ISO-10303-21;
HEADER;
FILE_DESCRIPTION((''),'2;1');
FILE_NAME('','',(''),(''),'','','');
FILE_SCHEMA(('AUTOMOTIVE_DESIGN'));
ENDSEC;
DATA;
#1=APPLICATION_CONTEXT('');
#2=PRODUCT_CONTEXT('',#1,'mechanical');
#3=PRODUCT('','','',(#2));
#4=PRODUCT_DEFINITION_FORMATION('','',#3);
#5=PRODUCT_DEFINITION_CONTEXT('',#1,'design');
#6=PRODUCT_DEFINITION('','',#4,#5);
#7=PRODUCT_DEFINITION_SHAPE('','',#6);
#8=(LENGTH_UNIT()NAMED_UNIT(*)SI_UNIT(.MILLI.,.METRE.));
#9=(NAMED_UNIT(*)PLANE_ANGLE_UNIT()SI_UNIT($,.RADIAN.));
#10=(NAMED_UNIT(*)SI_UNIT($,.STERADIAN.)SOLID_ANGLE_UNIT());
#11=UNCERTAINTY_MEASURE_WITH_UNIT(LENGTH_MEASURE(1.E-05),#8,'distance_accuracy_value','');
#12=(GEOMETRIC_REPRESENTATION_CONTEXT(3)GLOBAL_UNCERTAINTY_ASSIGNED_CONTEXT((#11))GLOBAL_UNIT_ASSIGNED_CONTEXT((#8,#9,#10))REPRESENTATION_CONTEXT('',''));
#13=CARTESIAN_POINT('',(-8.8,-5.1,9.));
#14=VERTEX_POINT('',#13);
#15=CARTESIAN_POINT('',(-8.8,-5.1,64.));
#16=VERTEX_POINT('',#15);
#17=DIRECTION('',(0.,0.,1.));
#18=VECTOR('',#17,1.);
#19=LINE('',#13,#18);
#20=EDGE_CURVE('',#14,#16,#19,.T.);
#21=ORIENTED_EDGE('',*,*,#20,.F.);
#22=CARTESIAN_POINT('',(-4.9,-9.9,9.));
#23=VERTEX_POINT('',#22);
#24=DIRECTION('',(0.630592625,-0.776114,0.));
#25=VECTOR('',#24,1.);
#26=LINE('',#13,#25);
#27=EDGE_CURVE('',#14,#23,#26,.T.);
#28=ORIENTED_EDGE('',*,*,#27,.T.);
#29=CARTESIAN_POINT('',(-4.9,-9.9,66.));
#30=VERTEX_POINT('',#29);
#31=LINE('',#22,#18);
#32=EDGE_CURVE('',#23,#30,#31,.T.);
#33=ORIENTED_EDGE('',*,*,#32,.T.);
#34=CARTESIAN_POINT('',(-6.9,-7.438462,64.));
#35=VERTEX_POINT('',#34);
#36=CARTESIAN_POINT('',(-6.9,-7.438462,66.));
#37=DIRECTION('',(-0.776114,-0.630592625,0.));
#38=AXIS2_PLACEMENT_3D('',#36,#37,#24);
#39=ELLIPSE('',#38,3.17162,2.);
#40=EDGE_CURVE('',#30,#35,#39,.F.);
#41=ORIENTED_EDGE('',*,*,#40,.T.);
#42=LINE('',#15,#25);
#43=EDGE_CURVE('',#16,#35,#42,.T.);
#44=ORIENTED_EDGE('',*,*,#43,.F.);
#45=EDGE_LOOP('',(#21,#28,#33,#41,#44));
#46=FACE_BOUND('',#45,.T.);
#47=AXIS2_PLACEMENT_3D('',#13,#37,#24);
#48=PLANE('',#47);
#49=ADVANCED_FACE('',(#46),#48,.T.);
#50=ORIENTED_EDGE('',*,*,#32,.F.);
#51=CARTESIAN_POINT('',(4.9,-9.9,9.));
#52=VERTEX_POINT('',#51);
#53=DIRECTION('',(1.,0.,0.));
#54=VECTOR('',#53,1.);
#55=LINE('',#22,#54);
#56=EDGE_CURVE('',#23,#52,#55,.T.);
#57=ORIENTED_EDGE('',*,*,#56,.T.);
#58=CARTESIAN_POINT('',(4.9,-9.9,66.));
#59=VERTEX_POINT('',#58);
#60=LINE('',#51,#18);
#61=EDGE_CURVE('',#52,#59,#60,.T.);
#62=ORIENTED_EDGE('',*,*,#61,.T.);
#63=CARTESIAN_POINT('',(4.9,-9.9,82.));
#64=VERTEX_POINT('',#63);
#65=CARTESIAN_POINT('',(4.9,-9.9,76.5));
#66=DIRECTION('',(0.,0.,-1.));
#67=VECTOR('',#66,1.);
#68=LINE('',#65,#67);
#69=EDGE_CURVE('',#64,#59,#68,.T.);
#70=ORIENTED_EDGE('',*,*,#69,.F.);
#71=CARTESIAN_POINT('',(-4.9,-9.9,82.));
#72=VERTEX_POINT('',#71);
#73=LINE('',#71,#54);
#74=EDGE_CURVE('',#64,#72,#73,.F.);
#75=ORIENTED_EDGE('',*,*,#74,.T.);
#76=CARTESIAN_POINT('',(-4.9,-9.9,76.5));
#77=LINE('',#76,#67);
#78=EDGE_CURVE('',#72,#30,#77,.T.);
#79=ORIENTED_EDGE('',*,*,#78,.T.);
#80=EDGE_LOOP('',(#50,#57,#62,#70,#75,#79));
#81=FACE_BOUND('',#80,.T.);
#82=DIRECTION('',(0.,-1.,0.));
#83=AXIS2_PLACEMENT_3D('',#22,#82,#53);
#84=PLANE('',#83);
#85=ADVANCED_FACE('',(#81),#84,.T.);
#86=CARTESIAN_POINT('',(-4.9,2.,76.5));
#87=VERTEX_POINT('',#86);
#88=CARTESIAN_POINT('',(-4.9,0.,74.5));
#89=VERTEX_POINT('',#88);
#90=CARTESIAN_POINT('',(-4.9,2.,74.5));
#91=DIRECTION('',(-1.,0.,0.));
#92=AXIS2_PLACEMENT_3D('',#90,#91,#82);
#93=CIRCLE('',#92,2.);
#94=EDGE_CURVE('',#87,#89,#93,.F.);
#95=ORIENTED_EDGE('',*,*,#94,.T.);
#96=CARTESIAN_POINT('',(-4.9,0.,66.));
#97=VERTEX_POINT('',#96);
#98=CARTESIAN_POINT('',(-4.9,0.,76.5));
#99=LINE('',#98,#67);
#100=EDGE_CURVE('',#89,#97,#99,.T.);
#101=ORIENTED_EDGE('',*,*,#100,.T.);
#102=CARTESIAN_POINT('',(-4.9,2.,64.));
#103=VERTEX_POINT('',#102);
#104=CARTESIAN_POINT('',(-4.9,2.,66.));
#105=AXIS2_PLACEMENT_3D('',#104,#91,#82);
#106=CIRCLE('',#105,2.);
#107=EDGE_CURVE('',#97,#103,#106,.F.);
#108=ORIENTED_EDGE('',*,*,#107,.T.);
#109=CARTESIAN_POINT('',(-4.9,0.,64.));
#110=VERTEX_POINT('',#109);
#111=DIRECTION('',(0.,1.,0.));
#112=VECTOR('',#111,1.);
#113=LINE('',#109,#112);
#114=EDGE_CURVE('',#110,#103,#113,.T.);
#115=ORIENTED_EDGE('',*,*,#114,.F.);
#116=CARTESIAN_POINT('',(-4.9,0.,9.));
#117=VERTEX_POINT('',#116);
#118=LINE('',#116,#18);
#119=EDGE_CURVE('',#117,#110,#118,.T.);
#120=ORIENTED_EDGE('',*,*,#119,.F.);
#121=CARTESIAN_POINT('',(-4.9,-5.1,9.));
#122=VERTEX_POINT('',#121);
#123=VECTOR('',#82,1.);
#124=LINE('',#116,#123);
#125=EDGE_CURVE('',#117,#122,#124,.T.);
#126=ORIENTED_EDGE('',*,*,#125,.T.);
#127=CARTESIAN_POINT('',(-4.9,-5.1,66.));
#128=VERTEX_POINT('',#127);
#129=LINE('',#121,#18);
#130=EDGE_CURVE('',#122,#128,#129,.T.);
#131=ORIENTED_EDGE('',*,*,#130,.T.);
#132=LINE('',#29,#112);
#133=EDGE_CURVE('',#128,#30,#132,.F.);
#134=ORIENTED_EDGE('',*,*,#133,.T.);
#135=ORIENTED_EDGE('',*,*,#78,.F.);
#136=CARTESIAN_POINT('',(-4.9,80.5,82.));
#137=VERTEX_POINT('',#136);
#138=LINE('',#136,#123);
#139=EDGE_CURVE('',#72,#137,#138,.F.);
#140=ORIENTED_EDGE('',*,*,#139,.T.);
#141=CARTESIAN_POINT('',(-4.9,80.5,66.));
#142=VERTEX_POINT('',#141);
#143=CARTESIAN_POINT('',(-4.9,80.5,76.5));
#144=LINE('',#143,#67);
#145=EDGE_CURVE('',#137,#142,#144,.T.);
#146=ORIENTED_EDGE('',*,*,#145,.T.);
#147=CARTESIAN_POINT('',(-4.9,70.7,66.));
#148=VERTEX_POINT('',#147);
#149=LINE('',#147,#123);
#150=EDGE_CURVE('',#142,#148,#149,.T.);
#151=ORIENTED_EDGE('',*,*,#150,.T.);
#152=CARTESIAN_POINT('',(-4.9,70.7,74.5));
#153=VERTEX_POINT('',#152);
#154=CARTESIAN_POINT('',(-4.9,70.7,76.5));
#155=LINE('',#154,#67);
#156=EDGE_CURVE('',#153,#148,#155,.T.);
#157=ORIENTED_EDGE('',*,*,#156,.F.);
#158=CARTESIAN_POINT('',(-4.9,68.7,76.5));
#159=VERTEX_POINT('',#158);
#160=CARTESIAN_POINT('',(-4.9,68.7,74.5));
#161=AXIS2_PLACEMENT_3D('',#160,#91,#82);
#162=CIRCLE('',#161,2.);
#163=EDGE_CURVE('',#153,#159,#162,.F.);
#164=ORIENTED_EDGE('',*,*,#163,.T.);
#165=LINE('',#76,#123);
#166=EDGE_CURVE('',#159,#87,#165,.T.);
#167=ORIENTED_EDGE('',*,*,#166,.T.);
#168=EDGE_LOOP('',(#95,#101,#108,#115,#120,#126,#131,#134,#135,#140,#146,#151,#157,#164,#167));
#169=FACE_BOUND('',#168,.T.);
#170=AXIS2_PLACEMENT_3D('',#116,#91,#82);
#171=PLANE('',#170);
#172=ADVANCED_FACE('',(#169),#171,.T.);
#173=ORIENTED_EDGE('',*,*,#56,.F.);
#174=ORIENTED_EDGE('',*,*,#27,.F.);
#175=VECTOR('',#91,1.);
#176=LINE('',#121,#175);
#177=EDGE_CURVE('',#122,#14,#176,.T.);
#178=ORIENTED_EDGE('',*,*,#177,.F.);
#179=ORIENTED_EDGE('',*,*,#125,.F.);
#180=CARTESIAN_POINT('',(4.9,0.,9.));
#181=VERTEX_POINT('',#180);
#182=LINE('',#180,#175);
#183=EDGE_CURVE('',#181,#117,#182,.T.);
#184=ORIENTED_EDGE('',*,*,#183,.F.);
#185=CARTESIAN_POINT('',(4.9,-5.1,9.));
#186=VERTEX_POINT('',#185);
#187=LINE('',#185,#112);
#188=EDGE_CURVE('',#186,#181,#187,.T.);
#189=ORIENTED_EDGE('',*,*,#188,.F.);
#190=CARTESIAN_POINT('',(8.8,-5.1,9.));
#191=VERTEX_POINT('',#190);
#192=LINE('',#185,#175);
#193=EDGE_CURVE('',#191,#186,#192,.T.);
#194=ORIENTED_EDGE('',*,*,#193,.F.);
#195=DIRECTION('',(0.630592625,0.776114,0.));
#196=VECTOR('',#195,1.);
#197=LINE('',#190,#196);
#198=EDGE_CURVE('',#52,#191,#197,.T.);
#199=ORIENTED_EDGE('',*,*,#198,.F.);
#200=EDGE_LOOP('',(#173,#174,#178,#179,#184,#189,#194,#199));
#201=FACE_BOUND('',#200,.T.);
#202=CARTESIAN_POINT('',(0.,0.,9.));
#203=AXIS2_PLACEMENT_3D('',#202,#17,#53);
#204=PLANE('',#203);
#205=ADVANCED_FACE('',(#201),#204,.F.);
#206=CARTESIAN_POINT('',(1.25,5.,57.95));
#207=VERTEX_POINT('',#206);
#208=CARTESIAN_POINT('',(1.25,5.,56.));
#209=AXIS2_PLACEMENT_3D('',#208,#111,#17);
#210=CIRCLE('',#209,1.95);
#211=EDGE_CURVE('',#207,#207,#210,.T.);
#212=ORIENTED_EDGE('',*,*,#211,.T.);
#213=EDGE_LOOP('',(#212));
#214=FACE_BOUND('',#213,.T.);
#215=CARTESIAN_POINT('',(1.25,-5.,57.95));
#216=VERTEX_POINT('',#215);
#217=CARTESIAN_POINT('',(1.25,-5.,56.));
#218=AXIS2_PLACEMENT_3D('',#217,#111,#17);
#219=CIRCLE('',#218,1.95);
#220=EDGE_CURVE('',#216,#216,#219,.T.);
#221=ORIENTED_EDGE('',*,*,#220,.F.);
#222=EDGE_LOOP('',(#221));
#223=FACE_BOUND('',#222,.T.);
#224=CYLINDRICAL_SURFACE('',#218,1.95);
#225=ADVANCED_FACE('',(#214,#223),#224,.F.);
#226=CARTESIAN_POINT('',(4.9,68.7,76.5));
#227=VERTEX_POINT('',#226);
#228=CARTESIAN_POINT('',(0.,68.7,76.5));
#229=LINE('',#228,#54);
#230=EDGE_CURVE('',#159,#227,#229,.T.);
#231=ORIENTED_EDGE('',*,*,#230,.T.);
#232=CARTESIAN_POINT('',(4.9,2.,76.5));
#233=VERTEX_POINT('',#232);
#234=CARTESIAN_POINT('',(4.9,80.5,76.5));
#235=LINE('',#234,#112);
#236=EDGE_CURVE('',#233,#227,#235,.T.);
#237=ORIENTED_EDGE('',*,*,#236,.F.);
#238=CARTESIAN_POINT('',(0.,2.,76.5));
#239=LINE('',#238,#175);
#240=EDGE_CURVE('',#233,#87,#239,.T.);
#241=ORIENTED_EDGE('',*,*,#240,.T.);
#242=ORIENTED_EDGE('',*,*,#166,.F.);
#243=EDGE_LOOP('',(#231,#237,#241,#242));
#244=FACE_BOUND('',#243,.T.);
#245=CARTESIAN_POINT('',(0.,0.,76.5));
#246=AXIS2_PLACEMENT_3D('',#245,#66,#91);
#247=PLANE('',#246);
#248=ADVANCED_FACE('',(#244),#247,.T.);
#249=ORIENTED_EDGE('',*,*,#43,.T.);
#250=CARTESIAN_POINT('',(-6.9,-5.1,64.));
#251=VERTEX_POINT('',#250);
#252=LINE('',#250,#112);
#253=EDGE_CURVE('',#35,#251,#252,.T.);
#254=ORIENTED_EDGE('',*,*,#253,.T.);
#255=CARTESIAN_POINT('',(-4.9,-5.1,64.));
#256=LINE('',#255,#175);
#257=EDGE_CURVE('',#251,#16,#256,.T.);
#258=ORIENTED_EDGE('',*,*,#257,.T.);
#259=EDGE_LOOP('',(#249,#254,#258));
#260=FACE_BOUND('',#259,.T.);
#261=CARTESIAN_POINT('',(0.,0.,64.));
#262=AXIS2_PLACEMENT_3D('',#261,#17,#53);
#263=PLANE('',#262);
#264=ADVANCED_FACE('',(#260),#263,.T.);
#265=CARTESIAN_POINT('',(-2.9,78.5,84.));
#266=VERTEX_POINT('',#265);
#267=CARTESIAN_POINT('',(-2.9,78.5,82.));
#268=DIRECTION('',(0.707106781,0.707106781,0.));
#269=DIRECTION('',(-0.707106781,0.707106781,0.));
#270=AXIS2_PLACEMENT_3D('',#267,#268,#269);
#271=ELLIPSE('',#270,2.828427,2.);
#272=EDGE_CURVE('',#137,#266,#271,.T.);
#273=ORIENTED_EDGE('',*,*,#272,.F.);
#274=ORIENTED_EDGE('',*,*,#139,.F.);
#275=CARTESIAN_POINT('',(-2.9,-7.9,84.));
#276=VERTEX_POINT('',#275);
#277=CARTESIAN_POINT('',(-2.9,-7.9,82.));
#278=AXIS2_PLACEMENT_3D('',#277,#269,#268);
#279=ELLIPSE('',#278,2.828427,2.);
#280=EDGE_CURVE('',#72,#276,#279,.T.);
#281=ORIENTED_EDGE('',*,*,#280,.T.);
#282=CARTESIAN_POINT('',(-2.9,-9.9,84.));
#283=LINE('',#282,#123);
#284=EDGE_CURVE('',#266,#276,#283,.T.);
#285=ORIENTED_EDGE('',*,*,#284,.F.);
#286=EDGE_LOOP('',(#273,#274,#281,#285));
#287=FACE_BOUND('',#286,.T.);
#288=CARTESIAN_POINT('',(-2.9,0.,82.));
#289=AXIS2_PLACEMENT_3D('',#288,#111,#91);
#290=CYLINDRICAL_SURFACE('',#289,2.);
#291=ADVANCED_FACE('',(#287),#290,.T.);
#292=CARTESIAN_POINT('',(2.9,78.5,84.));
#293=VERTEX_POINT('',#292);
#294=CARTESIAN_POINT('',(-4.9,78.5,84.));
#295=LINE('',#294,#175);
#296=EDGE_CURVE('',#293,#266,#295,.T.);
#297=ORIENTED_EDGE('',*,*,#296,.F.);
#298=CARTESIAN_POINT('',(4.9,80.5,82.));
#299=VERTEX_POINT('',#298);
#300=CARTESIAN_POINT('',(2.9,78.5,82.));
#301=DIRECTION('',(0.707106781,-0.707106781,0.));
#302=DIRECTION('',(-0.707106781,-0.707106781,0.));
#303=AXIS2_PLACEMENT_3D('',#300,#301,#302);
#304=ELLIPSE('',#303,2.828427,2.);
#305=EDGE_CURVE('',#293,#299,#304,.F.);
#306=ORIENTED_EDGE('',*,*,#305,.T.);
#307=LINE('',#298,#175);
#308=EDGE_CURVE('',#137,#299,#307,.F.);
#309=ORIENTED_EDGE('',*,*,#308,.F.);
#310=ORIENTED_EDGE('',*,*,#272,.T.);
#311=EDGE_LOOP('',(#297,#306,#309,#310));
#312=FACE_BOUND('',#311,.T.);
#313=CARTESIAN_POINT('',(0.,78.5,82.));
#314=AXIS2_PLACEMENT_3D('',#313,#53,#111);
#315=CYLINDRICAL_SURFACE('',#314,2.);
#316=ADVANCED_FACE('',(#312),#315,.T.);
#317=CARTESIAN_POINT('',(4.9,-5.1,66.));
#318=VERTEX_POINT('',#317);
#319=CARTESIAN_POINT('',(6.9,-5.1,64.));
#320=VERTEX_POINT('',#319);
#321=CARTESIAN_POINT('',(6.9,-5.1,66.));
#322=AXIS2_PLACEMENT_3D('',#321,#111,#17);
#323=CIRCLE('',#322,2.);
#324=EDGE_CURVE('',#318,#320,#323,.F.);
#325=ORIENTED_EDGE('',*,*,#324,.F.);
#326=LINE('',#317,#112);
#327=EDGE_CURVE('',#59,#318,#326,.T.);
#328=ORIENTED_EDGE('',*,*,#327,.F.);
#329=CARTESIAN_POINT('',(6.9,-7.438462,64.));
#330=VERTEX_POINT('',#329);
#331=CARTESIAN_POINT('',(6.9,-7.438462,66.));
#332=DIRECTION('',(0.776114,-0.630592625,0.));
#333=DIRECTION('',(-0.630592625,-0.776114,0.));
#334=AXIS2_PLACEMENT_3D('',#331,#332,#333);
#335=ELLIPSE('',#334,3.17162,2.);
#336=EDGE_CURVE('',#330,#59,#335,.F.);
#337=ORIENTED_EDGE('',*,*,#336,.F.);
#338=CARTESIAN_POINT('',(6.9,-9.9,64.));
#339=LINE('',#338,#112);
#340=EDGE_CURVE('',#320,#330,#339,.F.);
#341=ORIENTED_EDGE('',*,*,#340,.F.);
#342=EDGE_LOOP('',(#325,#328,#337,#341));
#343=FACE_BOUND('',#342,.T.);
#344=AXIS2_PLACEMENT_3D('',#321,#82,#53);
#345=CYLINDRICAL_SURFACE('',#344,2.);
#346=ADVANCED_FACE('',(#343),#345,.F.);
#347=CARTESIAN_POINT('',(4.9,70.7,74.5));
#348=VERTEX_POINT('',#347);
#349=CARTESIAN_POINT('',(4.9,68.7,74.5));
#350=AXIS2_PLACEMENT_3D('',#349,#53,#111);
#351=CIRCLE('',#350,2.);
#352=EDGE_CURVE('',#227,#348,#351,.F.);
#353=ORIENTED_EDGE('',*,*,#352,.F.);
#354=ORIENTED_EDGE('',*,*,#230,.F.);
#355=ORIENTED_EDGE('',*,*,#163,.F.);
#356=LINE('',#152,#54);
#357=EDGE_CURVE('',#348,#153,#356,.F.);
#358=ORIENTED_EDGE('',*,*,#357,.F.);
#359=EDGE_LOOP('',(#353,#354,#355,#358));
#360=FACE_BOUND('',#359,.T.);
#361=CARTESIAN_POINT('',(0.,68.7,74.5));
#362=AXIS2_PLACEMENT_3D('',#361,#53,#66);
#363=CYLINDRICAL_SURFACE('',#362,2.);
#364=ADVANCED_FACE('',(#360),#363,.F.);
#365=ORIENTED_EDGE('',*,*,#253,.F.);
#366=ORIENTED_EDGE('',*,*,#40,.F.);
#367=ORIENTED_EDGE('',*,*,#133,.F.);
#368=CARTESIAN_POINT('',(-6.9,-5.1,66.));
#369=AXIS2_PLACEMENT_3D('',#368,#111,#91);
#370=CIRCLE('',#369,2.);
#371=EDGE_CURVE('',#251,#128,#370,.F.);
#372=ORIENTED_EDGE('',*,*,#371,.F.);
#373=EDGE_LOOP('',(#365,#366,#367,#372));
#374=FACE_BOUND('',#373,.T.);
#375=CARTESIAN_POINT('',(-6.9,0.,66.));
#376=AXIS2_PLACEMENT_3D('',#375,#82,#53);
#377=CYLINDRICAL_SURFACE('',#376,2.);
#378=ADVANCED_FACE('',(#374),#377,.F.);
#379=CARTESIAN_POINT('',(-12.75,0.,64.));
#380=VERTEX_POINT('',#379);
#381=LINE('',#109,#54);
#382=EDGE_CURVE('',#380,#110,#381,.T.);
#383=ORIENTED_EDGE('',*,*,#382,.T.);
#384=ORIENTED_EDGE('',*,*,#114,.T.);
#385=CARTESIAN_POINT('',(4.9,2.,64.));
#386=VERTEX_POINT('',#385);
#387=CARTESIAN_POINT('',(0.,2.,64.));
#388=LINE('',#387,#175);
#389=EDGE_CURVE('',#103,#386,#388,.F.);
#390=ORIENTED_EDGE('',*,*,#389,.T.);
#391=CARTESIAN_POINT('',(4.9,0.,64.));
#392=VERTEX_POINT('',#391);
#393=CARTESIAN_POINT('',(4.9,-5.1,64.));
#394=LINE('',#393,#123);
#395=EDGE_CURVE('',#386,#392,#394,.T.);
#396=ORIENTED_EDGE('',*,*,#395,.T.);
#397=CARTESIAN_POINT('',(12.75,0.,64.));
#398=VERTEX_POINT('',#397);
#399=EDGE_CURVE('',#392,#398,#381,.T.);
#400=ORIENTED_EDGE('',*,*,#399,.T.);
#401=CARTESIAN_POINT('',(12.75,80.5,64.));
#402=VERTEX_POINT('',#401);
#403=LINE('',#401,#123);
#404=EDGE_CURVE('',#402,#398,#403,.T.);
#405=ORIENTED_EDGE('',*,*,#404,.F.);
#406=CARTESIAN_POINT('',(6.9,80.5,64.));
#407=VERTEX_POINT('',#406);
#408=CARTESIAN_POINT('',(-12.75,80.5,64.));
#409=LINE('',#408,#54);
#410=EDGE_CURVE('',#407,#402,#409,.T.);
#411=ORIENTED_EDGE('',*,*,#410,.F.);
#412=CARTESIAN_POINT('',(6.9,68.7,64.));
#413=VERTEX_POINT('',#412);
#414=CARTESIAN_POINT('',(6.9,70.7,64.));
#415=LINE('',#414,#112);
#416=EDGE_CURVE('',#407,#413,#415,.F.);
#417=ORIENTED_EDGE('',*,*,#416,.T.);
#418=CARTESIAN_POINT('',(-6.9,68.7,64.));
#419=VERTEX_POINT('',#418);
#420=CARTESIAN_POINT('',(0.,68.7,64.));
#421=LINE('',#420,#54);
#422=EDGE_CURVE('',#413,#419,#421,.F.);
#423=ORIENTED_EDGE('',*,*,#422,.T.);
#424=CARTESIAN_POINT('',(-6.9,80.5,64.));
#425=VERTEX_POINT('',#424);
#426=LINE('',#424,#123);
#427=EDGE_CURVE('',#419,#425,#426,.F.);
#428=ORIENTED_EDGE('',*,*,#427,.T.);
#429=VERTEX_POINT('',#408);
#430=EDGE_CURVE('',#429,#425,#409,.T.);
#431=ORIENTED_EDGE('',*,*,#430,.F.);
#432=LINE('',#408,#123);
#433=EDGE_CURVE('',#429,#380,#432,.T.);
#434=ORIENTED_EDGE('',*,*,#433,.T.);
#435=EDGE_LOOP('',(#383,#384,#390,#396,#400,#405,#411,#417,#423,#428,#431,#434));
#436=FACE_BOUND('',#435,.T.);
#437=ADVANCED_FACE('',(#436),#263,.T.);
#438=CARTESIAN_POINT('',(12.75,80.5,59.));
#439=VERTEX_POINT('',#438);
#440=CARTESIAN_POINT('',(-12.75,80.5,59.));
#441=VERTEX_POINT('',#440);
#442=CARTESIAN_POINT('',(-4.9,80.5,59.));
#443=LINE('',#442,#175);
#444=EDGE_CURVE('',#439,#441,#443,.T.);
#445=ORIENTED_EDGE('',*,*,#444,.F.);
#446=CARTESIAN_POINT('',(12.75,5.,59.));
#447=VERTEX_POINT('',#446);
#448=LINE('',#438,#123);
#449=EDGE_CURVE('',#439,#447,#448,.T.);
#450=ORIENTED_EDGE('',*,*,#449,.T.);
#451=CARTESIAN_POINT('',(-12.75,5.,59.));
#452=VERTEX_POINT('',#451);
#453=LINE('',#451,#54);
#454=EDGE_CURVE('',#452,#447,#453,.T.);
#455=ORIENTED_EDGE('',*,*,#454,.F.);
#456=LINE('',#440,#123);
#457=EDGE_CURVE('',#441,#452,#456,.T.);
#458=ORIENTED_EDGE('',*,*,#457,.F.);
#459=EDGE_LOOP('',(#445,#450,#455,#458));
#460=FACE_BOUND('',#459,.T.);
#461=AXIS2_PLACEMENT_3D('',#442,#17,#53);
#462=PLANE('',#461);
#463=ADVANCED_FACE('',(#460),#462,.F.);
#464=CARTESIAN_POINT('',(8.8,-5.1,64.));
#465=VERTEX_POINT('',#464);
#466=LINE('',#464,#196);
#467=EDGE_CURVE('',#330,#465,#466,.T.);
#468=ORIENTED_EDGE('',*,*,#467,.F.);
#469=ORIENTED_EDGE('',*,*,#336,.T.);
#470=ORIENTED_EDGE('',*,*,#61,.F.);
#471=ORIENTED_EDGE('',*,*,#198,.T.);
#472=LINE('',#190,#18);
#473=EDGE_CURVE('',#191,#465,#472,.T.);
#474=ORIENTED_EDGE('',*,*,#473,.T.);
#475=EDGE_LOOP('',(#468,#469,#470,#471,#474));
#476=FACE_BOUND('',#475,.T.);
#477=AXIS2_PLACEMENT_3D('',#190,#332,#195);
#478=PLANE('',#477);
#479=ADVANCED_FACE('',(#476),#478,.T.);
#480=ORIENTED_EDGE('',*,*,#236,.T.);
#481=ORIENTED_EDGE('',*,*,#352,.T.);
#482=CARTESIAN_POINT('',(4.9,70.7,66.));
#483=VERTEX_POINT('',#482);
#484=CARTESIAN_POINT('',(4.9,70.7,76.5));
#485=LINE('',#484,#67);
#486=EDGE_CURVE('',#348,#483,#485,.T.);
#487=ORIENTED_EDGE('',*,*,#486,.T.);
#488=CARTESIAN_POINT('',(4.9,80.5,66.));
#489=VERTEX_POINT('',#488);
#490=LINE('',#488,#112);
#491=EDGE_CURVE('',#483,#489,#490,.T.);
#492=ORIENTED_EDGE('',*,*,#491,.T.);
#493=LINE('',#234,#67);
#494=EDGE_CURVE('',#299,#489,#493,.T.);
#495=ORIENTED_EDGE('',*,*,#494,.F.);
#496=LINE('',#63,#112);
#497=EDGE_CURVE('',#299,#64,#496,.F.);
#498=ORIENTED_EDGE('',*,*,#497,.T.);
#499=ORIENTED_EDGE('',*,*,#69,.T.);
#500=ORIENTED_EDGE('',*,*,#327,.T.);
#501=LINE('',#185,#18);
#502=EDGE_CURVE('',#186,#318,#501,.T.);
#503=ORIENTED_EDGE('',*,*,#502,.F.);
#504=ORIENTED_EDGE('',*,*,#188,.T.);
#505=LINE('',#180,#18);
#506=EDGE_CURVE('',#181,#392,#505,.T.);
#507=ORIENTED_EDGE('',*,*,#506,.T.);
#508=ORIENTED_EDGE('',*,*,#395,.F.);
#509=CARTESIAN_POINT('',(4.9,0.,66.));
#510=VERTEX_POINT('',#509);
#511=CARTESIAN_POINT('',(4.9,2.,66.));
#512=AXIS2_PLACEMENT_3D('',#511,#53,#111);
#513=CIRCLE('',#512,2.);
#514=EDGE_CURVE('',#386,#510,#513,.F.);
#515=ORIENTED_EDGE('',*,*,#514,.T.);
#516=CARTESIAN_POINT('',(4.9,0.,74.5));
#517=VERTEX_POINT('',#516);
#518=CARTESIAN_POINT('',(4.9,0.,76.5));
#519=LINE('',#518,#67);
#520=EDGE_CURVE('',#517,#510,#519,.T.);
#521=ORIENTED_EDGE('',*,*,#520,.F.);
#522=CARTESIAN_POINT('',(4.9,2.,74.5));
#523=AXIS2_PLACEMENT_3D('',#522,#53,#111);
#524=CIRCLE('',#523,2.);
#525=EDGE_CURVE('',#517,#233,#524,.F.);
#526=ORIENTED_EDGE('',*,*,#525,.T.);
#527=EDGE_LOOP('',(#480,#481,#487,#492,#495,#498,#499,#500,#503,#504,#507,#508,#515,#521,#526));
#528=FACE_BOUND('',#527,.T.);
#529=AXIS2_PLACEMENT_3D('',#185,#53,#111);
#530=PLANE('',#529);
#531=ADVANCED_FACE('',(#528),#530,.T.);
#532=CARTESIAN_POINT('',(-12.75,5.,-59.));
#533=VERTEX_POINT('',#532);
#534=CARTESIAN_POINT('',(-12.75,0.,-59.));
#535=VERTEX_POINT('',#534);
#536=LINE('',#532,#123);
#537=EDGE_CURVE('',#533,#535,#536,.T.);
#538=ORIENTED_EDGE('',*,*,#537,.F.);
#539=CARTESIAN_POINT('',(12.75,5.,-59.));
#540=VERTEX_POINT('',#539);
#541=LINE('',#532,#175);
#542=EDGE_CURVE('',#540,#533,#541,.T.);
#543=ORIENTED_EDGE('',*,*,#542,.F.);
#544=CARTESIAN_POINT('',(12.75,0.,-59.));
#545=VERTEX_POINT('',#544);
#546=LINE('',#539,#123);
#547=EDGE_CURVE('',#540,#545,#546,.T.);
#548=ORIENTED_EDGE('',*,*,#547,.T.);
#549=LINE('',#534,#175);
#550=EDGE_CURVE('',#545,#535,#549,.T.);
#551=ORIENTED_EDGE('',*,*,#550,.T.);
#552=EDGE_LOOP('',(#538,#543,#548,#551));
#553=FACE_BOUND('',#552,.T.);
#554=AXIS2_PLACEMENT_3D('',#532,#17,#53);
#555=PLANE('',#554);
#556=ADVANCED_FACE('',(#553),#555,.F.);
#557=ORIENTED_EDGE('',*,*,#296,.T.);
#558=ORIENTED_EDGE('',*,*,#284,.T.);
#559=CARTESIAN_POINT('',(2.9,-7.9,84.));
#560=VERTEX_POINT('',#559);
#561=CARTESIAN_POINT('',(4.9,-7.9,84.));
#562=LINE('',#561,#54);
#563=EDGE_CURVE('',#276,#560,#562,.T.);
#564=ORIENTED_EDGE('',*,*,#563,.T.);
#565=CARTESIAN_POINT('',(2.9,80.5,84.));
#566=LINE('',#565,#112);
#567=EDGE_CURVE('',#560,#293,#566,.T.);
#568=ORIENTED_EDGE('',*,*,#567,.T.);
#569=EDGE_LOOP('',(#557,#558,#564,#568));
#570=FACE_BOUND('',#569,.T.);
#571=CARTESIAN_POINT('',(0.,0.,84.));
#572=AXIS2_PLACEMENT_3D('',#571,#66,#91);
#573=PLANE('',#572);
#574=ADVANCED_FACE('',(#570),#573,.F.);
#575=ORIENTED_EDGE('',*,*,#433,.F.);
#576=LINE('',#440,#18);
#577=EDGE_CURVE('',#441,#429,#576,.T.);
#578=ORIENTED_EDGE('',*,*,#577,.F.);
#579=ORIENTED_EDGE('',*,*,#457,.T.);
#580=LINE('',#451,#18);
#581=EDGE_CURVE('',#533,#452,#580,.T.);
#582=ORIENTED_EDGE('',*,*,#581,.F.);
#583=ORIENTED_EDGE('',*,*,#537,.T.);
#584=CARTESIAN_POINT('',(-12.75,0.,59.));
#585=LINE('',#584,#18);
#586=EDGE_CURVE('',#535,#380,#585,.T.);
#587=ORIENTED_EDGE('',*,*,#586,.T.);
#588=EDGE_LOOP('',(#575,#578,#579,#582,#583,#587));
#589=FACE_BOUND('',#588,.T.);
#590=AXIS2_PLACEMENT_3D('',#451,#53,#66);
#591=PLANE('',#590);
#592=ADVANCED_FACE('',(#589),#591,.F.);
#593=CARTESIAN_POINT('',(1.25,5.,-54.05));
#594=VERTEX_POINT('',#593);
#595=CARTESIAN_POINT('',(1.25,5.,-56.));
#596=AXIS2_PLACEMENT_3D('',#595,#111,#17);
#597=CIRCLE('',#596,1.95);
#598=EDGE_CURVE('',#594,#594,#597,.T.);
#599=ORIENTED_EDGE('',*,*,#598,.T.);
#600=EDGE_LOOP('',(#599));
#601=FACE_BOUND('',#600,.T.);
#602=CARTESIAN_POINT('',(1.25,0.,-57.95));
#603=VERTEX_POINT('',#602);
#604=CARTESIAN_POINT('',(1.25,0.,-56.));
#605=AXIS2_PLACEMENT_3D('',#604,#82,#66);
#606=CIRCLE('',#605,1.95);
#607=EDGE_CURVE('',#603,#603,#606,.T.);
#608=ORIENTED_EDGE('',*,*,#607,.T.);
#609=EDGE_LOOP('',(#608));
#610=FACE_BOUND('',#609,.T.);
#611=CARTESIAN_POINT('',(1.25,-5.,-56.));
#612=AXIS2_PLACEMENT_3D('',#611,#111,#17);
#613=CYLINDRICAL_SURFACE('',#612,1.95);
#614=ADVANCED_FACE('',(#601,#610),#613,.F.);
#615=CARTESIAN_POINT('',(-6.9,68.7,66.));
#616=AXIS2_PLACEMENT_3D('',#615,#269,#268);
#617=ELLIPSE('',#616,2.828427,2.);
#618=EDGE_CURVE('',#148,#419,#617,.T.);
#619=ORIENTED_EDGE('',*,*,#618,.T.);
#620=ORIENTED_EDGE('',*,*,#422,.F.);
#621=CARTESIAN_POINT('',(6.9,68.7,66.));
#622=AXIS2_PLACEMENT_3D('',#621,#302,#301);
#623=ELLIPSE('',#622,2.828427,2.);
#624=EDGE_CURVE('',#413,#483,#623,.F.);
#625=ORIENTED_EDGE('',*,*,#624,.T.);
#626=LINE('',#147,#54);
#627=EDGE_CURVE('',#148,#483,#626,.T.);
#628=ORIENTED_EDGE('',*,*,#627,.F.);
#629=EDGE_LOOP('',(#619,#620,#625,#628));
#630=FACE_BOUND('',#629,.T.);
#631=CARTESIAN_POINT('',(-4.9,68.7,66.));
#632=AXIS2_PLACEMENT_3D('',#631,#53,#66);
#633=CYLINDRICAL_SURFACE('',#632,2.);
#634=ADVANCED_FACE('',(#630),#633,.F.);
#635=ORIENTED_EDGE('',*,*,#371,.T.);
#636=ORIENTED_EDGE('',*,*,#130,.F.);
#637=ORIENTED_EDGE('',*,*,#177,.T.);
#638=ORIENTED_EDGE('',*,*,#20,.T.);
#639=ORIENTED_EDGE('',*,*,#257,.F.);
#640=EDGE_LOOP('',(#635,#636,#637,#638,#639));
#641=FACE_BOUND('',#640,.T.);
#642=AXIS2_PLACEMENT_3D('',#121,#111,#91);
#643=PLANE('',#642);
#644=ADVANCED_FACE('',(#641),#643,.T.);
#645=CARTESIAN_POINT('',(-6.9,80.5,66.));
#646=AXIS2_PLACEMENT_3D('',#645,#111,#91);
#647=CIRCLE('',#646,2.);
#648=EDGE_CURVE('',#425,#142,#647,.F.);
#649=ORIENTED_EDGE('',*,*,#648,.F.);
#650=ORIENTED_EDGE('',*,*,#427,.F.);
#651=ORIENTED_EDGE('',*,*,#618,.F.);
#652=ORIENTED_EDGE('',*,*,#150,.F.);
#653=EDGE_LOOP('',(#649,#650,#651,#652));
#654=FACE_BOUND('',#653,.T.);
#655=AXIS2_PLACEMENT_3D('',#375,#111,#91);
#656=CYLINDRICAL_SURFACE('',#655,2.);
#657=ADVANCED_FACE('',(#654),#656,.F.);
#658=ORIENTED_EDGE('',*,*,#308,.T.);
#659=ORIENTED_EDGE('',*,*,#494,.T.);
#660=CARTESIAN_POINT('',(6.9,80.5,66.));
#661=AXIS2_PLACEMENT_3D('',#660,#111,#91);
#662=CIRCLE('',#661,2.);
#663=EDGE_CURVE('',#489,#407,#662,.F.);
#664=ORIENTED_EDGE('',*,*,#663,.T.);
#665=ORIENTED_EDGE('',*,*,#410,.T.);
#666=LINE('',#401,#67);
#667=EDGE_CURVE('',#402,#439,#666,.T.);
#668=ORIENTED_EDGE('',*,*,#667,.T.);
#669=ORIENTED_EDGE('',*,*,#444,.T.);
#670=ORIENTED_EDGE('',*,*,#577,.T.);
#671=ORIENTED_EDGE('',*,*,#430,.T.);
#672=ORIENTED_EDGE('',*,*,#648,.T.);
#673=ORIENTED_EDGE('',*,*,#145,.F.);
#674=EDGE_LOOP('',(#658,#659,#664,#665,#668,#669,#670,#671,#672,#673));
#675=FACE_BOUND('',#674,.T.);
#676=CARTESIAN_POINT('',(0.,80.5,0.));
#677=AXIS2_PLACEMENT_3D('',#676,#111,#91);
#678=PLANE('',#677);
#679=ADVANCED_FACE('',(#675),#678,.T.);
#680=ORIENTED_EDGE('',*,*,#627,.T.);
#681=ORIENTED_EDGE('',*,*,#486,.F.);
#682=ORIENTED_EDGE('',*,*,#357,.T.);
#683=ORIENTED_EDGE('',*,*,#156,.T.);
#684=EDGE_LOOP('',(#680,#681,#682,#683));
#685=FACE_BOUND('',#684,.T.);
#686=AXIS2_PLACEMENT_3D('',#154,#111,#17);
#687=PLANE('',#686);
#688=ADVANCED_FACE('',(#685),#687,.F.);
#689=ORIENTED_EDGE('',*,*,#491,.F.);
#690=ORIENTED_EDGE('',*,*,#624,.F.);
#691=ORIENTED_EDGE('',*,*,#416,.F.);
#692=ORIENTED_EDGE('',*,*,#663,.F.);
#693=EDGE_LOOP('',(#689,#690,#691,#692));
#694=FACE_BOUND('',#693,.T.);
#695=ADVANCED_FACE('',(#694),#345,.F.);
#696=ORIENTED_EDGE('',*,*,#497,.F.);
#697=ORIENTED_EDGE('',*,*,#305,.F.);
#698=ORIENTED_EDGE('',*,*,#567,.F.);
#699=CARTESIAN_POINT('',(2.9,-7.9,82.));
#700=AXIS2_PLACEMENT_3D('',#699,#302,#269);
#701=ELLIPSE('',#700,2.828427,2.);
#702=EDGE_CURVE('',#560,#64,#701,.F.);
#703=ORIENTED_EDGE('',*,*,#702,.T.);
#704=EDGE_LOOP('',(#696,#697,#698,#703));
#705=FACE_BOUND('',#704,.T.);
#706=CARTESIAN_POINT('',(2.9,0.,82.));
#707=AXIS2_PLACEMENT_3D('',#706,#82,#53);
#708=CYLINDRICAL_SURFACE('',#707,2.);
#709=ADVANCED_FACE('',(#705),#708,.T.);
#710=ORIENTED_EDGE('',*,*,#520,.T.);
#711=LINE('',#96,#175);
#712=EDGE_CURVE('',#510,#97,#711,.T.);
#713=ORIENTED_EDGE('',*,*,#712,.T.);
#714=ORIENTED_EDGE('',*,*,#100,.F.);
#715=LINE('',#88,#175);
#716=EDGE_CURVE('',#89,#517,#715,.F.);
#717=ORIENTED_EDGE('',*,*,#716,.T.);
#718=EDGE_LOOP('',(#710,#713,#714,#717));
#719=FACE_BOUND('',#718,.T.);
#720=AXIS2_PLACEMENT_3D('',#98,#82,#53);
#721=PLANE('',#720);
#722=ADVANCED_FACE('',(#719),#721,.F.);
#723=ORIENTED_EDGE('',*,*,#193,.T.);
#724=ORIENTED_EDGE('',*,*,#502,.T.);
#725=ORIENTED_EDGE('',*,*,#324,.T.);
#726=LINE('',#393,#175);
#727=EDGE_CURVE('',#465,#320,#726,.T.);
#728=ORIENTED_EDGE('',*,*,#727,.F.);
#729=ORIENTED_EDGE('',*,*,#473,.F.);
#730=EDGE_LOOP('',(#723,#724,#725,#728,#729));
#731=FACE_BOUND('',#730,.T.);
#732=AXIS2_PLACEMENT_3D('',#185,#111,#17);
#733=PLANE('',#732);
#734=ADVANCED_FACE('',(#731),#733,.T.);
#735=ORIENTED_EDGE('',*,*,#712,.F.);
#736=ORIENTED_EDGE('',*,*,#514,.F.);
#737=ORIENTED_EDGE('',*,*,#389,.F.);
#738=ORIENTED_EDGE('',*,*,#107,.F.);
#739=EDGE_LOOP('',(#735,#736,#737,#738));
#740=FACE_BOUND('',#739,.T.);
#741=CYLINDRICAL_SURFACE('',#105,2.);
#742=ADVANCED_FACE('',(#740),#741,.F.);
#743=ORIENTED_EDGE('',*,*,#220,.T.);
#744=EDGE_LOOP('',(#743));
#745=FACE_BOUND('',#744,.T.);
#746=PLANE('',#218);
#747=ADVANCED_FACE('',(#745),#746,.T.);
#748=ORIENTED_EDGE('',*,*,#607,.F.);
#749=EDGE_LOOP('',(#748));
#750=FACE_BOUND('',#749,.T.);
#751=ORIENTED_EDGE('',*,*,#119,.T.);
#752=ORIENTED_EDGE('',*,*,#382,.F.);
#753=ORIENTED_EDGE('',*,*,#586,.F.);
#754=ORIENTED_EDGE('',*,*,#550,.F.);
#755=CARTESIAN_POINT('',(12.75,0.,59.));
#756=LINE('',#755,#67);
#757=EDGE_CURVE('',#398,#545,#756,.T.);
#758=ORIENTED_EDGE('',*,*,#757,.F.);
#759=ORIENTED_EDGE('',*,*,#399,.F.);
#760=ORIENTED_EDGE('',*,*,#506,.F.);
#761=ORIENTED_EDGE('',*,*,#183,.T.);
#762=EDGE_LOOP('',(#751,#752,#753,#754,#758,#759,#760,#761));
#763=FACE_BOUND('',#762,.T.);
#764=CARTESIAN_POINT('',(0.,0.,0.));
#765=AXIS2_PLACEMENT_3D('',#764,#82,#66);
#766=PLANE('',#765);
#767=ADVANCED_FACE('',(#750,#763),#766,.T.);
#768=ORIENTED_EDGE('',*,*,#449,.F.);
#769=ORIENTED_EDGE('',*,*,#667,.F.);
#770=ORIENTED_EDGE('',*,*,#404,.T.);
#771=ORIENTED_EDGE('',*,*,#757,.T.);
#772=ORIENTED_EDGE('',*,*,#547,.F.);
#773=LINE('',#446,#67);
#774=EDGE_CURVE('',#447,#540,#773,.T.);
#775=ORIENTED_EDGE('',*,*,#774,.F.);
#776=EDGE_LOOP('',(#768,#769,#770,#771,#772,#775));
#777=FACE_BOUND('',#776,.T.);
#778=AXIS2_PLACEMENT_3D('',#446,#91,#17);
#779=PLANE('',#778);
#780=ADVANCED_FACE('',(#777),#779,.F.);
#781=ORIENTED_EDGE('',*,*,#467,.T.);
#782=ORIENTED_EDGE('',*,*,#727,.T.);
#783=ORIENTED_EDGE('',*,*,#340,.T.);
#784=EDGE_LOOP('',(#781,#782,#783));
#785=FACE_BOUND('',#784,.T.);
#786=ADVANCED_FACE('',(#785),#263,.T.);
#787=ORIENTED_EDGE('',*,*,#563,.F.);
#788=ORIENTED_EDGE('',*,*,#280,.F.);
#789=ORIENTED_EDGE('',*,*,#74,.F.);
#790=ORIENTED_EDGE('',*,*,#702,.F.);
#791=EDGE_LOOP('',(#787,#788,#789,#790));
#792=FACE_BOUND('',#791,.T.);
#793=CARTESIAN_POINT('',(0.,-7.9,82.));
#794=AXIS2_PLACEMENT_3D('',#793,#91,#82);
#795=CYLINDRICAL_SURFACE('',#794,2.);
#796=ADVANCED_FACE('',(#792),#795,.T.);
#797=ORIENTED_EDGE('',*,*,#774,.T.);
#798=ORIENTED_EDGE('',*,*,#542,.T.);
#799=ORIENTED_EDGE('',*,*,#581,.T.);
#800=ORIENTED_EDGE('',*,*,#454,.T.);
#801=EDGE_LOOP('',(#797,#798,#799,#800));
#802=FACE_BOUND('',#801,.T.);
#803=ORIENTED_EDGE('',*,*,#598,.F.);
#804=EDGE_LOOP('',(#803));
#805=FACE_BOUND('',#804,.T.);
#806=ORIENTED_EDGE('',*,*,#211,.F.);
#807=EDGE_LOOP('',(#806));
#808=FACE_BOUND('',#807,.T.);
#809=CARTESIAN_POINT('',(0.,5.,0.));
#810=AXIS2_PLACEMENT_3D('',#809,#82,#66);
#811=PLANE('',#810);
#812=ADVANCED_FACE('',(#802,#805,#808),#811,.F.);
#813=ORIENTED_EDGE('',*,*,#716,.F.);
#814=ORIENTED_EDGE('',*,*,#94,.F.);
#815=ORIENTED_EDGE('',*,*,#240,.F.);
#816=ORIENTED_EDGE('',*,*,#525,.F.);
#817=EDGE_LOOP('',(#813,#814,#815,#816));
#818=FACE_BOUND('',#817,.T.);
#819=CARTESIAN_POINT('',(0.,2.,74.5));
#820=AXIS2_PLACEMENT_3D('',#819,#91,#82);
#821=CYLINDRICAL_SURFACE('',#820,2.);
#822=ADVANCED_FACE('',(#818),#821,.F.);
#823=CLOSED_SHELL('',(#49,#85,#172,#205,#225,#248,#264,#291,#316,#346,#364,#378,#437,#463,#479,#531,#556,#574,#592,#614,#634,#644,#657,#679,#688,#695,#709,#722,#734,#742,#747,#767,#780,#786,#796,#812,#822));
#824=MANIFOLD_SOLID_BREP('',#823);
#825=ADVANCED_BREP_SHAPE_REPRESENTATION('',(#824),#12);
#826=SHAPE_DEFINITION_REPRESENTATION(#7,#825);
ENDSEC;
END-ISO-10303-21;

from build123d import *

# Parameters (mm, degrees)
SKETCH1_W            = 25.5
SKETCH1_H            = 118
BOSS_EXTRUDE1_DEPTH  = 5
BOSS_EXTRUDE5_DEPTH  = 50
SKETCH2_R            = 1.95
CUT_EXTRUDE1_DEPTH   = 10
BOSS_EXTRUDE7_DEPTH  = 5
BOSS_EXTRUDE8_DEPTH  = 80.5
SKETCH9_W            = 9.8
SKETCH9_H            = 9.8
SKETCH9_H_2          = 9.9
BOSS_EXTRUDE10_DEPTH = 12.5
SKETCH10_W           = 9.8
SKETCH10_H           = 90.4
BOSS_EXTRUDE11_DEPTH = 7.5
FILLET1_R            = 2


with BuildPart() as part:
    # Sketch1 → Boss-Extrude1 (new body)
    with BuildSketch(Plane(origin=(0, 0, 0), x_dir=(1, 0, 0), z_dir=(0, 1, 0))):
        Rectangle(SKETCH1_W, SKETCH1_H)
    extrude(amount=BOSS_EXTRUDE1_DEPTH)

    # Sketch5 → Boss-Extrude5 (add)
    with BuildSketch(Plane.XY.offset(59)):
        Polygon((-4.9, 0), (-4.9, -5.1), (-8.8, -5.1), (-4.9, -9.9), (4.9, -9.9), (8.8, -5.1), (4.9, -5.1), (4.9, 0), align=None)
    extrude(amount=-BOSS_EXTRUDE5_DEPTH)

    # Sketch2 → Cut-Extrude1 (cut)
    with BuildSketch(Plane(origin=(0, 5, 0), x_dir=(1, 0, 0), z_dir=(0, 1, 0))):
        with Locations(Location((1.25, 56, 0), (0, 0, 270))):
            Circle(SKETCH2_R)
        with Locations(Location((1.25, -56, 0), (0, 0, 270))):
            Circle(SKETCH2_R)
    extrude(amount=-CUT_EXTRUDE1_DEPTH, mode=Mode.SUBTRACT)

    # Sketch5<4> → Boss-Extrude7 (add)
    with BuildSketch(Plane.XY.offset(59)):
        Polygon((-4.9, 0), (-4.9, -5.1), (-8.8, -5.1), (-4.9, -9.9), (4.9, -9.9), (8.8, -5.1), (4.9, -5.1), (4.9, 0), align=None)
    extrude(amount=BOSS_EXTRUDE7_DEPTH)

    # Sketch8 → Boss-Extrude8 (add)
    with BuildSketch(Plane(origin=(0, 0, 0), x_dir=(1, 0, 0), z_dir=(0, 1, 0))):
        Polygon((-4.9, -64), (12.75, -64), (12.75, -59), (-4.9, -59), (-12.75, -59), (-12.75, -64), align=None)
    extrude(amount=BOSS_EXTRUDE8_DEPTH)

    # Sketch9 → Boss-Extrude10 (add)
    with BuildSketch(Plane.XY.offset(64)):
        with Locations((0, 75.6)):
            Rectangle(SKETCH9_W, SKETCH9_H)
        with Locations((0, -4.95)):
            Rectangle(SKETCH9_W, SKETCH9_H_2)
    extrude(amount=BOSS_EXTRUDE10_DEPTH)

    # Sketch10 → Boss-Extrude11 (add)
    with BuildSketch(Plane.XY.offset(76.5)):
        with Locations((0, 35.3)):
            Rectangle(SKETCH10_W, SKETCH10_H)
    extrude(amount=BOSS_EXTRUDE11_DEPTH)

    # Fillet1
    # the kernel refuses this fillet: 2 mm, written as the material it adds along each edge
    with BuildSketch(Plane(origin=(4.9, -9.9, 64), x_dir=(0, 0, 1), z_dir=(0, 1, 0))) as fillet1_piece_1_section:
        with BuildLine():
            CenterArc((FILLET1_R, FILLET1_R), FILLET1_R, 180, 90)
            Line((0, FILLET1_R), (-FILLET1_R * 0.02, FILLET1_R))
            Line((-FILLET1_R * 0.02, FILLET1_R), (-FILLET1_R * 0.02, -FILLET1_R * 0.02))
            Line((-FILLET1_R * 0.02, -FILLET1_R * 0.02), (FILLET1_R, -FILLET1_R * 0.02))
            Line((FILLET1_R, -FILLET1_R * 0.02), (FILLET1_R, 0))
        make_face()
    fillet1_piece_1 = extrude(amount=4.8, mode=Mode.PRIVATE)
    fillet1_piece_1 = split(fillet1_piece_1, bisect_by=Plane(origin=(6.354004959, -8.110455435, 64.484419844), z_dir=(-0.7761140001162659, 0.6305926250944655, 0)), keep=Keep.TOP, mode=Mode.PRIVATE)
    add(fillet1_piece_1)
    with BuildSketch(Plane(origin=(4.9, 0, 64), x_dir=(0, 0, 1), z_dir=(-1, 0, 0))) as fillet1_piece_2_section:
        with BuildLine():
            CenterArc((FILLET1_R, FILLET1_R), FILLET1_R, 180, 90)
            Line((0, FILLET1_R), (-FILLET1_R * 0.02, FILLET1_R))
            Line((-FILLET1_R * 0.02, FILLET1_R), (-FILLET1_R * 0.02, -FILLET1_R * 0.02))
            Line((-FILLET1_R * 0.02, -FILLET1_R * 0.02), (FILLET1_R, -FILLET1_R * 0.02))
            Line((FILLET1_R, -FILLET1_R * 0.02), (FILLET1_R, 0))
        make_face()
    fillet1_piece_2 = extrude(amount=9.8, mode=Mode.PRIVATE)
    fillet1_piece_2 = split(fillet1_piece_2, bisect_by=Plane(origin=(0, 0, 64.406946259), z_dir=(0, 1, 0)), keep=Keep.TOP, mode=Mode.PRIVATE)
    add(fillet1_piece_2)
    with BuildSketch(Plane(origin=(4.9, 0, 76.5), x_dir=(0, 0, -1), z_dir=(-1, 0, 0))) as fillet1_piece_3:
        with BuildLine():
            CenterArc((FILLET1_R, -FILLET1_R), FILLET1_R, 90, 90)
            Line((0, -FILLET1_R), (-FILLET1_R * 0.02, -FILLET1_R))
            Line((-FILLET1_R * 0.02, -FILLET1_R), (-FILLET1_R * 0.02, FILLET1_R * 0.02))
            Line((-FILLET1_R * 0.02, FILLET1_R * 0.02), (FILLET1_R, FILLET1_R * 0.02))
            Line((FILLET1_R, FILLET1_R * 0.02), (FILLET1_R, 0))
        make_face()
    extrude(amount=9.8)
    with BuildSketch(Plane(origin=(4.9, 70.7, 64), x_dir=(0, 0, 1), z_dir=(0, 1, 0)), Plane(origin=(-4.9, 80.5, 64), x_dir=(0, 0, 1), z_dir=(0, -1, 0)), Plane(origin=(-4.9, 70.7, 64), x_dir=(0, 0, 1), z_dir=(1, 0, 0)), Plane(origin=(-4.9, 70.7, 76.5), x_dir=(0, -1, 0), z_dir=(1, 0, 0))) as fillet1_piece_4:
        with BuildLine():
            CenterArc((FILLET1_R, FILLET1_R), FILLET1_R, 180, 90)
            Line((0, FILLET1_R), (-FILLET1_R * 0.02, FILLET1_R))
            Line((-FILLET1_R * 0.02, FILLET1_R), (-FILLET1_R * 0.02, -FILLET1_R * 0.02))
            Line((-FILLET1_R * 0.02, -FILLET1_R * 0.02), (FILLET1_R, -FILLET1_R * 0.02))
            Line((FILLET1_R, -FILLET1_R * 0.02), (FILLET1_R, 0))
        make_face()
    extrude(amount=9.8)
    with BuildSketch(Plane(origin=(-4.9, -5.1, 64), x_dir=(-1, 0, 0), z_dir=(0, -1, 0))) as fillet1_piece_5_section:
        with BuildLine():
            CenterArc((FILLET1_R, -FILLET1_R), FILLET1_R, 90, 90)
            Line((0, -FILLET1_R), (-FILLET1_R * 0.02, -FILLET1_R))
            Line((-FILLET1_R * 0.02, -FILLET1_R), (-FILLET1_R * 0.02, FILLET1_R * 0.02))
            Line((-FILLET1_R * 0.02, FILLET1_R * 0.02), (FILLET1_R, FILLET1_R * 0.02))
            Line((FILLET1_R, FILLET1_R * 0.02), (FILLET1_R, 0))
        make_face()
    fillet1_piece_5 = extrude(amount=4.8, mode=Mode.PRIVATE)
    fillet1_piece_5 = split(fillet1_piece_5, bisect_by=Plane(origin=(-6.354004959, -8.110455435, 64.484419844), z_dir=(0.7761140001162656, 0.6305926250944656, 0)), keep=Keep.TOP, mode=Mode.PRIVATE)
    add(fillet1_piece_5)
    with BuildSketch(Plane(origin=(4.9, 65.7, 64), x_dir=(0, 0, 1), z_dir=(0, 1, 0))) as fillet1_piece_6a_section:
        with BuildLine():
            CenterArc((FILLET1_R, FILLET1_R), FILLET1_R, 180, 90)
            Line((0, FILLET1_R), (-FILLET1_R * 0.02, FILLET1_R))
            Line((-FILLET1_R * 0.02, FILLET1_R), (-FILLET1_R * 0.02, -FILLET1_R * 0.02))
            Line((-FILLET1_R * 0.02, -FILLET1_R * 0.02), (FILLET1_R, -FILLET1_R * 0.02))
            Line((FILLET1_R, -FILLET1_R * 0.02), (FILLET1_R, 0))
        make_face()
    fillet1_piece_6a = extrude(amount=14.8, mode=Mode.PRIVATE)
    fillet1_piece_6a = split(fillet1_piece_6a, bisect_by=Plane(origin=(5.352790229, 70.7, 64.452790229), z_dir=(0, -1, 0)), keep=Keep.TOP, mode=Mode.PRIVATE)
    with BuildSketch(Plane(origin=(-4.9, 70.7, 64), x_dir=(0, 0, 1), z_dir=(1, 0, 0))) as fillet1_piece_6b_section:
        with BuildLine():
            CenterArc((FILLET1_R, FILLET1_R), FILLET1_R, 180, 90)
            Line((0, FILLET1_R), (-FILLET1_R * 0.02, FILLET1_R))
            Line((-FILLET1_R * 0.02, FILLET1_R), (-FILLET1_R * 0.02, -FILLET1_R * 0.02))
            Line((-FILLET1_R * 0.02, -FILLET1_R * 0.02), (FILLET1_R, -FILLET1_R * 0.02))
            Line((FILLET1_R, -FILLET1_R * 0.02), (FILLET1_R, 0))
        make_face()
    fillet1_piece_6b = extrude(amount=14.8, mode=Mode.PRIVATE)
    fillet1_piece_6b = split(fillet1_piece_6b, bisect_by=Plane(origin=(4.9, 70.247209771, 64.452790229), z_dir=(1, 0, 0)), keep=Keep.TOP, mode=Mode.PRIVATE)
    fillet1_piece_6 = fillet1_piece_6a & fillet1_piece_6b
    add(fillet1_piece_6)
    with BuildSketch(Plane(origin=(-9.9, 70.7, 64), x_dir=(0, 0, 1), z_dir=(1, 0, 0))) as fillet1_piece_7a_section:
        with BuildLine():
            CenterArc((FILLET1_R, FILLET1_R), FILLET1_R, 180, 90)
            Line((0, FILLET1_R), (-FILLET1_R * 0.02, FILLET1_R))
            Line((-FILLET1_R * 0.02, FILLET1_R), (-FILLET1_R * 0.02, -FILLET1_R * 0.02))
            Line((-FILLET1_R * 0.02, -FILLET1_R * 0.02), (FILLET1_R, -FILLET1_R * 0.02))
            Line((FILLET1_R, -FILLET1_R * 0.02), (FILLET1_R, 0))
        make_face()
    fillet1_piece_7a = extrude(amount=14.8, mode=Mode.PRIVATE)
    fillet1_piece_7a = split(fillet1_piece_7a, bisect_by=Plane(origin=(-4.9, 70.247209771, 64.452790229), z_dir=(-1, 0, 0)), keep=Keep.TOP, mode=Mode.PRIVATE)
    with BuildSketch(Plane(origin=(-4.9, 80.5, 64), x_dir=(0, 0, 1), z_dir=(0, -1, 0))) as fillet1_piece_7b_section:
        with BuildLine():
            CenterArc((FILLET1_R, FILLET1_R), FILLET1_R, 180, 90)
            Line((0, FILLET1_R), (-FILLET1_R * 0.02, FILLET1_R))
            Line((-FILLET1_R * 0.02, FILLET1_R), (-FILLET1_R * 0.02, -FILLET1_R * 0.02))
            Line((-FILLET1_R * 0.02, -FILLET1_R * 0.02), (FILLET1_R, -FILLET1_R * 0.02))
            Line((FILLET1_R, -FILLET1_R * 0.02), (FILLET1_R, 0))
        make_face()
    fillet1_piece_7b = extrude(amount=14.8, mode=Mode.PRIVATE)
    fillet1_piece_7b = split(fillet1_piece_7b, bisect_by=Plane(origin=(-5.352790229, 70.7, 64.452790229), z_dir=(0, -1, 0)), keep=Keep.TOP, mode=Mode.PRIVATE)
    fillet1_piece_7 = fillet1_piece_7a & fillet1_piece_7b
    add(fillet1_piece_7)
    # the kernel refuses this fillet: 2 mm, written as the material it takes off along each edge
    with BuildSketch(Plane(origin=(-4.9, -9.9, 84), x_dir=(1, 0, 0), z_dir=(0, 1, 0))) as fillet1_2_piece_1:
        with BuildLine():
            CenterArc((FILLET1_R, FILLET1_R), FILLET1_R, 180, 90)
            Line((0, FILLET1_R), (-FILLET1_R * 0.02, FILLET1_R))
            Line((-FILLET1_R * 0.02, FILLET1_R), (-FILLET1_R * 0.02, -FILLET1_R * 0.02))
            Line((-FILLET1_R * 0.02, -FILLET1_R * 0.02), (FILLET1_R, -FILLET1_R * 0.02))
            Line((FILLET1_R, -FILLET1_R * 0.02), (FILLET1_R, 0))
        make_face()
    extrude(amount=90.4, mode=Mode.SUBTRACT)
    with BuildSketch(Plane(origin=(4.9, -9.9, 84), x_dir=(0, 1, 0), z_dir=(-1, 0, 0)), Plane(origin=(-4.9, 80.5, 84), x_dir=(0, -1, 0), z_dir=(1, 0, 0))) as fillet1_2_piece_2:
        with BuildLine():
            CenterArc((FILLET1_R, FILLET1_R), FILLET1_R, 180, 90)
            Line((0, FILLET1_R), (-FILLET1_R * 0.02, FILLET1_R))
            Line((-FILLET1_R * 0.02, FILLET1_R), (-FILLET1_R * 0.02, -FILLET1_R * 0.02))
            Line((-FILLET1_R * 0.02, -FILLET1_R * 0.02), (FILLET1_R, -FILLET1_R * 0.02))
            Line((FILLET1_R, -FILLET1_R * 0.02), (FILLET1_R, 0))
        make_face()
    extrude(amount=9.8, mode=Mode.SUBTRACT)
    with BuildSketch(Plane(origin=(4.9, 80.5, 84), x_dir=(0, 0, -1), z_dir=(0, -1, 0))) as fillet1_2_piece_3:
        with BuildLine():
            CenterArc((FILLET1_R, -FILLET1_R), FILLET1_R, 90, 90)
            Line((0, -FILLET1_R), (-FILLET1_R * 0.02, -FILLET1_R))
            Line((-FILLET1_R * 0.02, -FILLET1_R), (-FILLET1_R * 0.02, FILLET1_R * 0.02))
            Line((-FILLET1_R * 0.02, FILLET1_R * 0.02), (FILLET1_R, FILLET1_R * 0.02))
            Line((FILLET1_R, FILLET1_R * 0.02), (FILLET1_R, 0))
        make_face()
    extrude(amount=90.4, mode=Mode.SUBTRACT)
    with BuildSketch(Plane(origin=(4.9, -9.9, 84), x_dir=(0, 1, 0), z_dir=(-1, 0, 0))) as fillet1_2_piece_4a_section:
        with BuildLine():
            CenterArc((FILLET1_R, FILLET1_R), FILLET1_R, 180, 90)
            Line((0, FILLET1_R), (-FILLET1_R * 0.02, FILLET1_R))
            Line((-FILLET1_R * 0.02, FILLET1_R), (-FILLET1_R * 0.02, -FILLET1_R * 0.02))
            Line((-FILLET1_R * 0.02, -FILLET1_R * 0.02), (FILLET1_R, -FILLET1_R * 0.02))
            Line((FILLET1_R, -FILLET1_R * 0.02), (FILLET1_R, 0))
        make_face()
    fillet1_2_piece_4a = extrude(amount=14.8, mode=Mode.PRIVATE)
    fillet1_2_piece_4a = split(fillet1_2_piece_4a, bisect_by=Plane(origin=(-4.9, -9.447209771, 83.547209771), z_dir=(-1, 0, 0)), keep=Keep.TOP, mode=Mode.PRIVATE)
    with BuildSketch(Plane(origin=(-4.9, -14.9, 84), x_dir=(1, 0, 0), z_dir=(0, 1, 0))) as fillet1_2_piece_4b_section:
        with BuildLine():
            CenterArc((FILLET1_R, FILLET1_R), FILLET1_R, 180, 90)
            Line((0, FILLET1_R), (-FILLET1_R * 0.02, FILLET1_R))
            Line((-FILLET1_R * 0.02, FILLET1_R), (-FILLET1_R * 0.02, -FILLET1_R * 0.02))
            Line((-FILLET1_R * 0.02, -FILLET1_R * 0.02), (FILLET1_R, -FILLET1_R * 0.02))
            Line((FILLET1_R, -FILLET1_R * 0.02), (FILLET1_R, 0))
        make_face()
    fillet1_2_piece_4b = extrude(amount=95.4, mode=Mode.PRIVATE)
    fillet1_2_piece_4b = split(fillet1_2_piece_4b, bisect_by=Plane(origin=(-4.447209771, -9.9, 83.547209771), z_dir=(0, -1, 0)), keep=Keep.TOP, mode=Mode.PRIVATE)
    fillet1_2_piece_4 = fillet1_2_piece_4a & fillet1_2_piece_4b
    add(fillet1_2_piece_4, mode=Mode.SUBTRACT)
    with BuildSketch(Plane(origin=(-4.9, -9.9, 84), x_dir=(1, 0, 0), z_dir=(0, 1, 0))) as fillet1_2_piece_5a_section:
        with BuildLine():
            CenterArc((FILLET1_R, FILLET1_R), FILLET1_R, 180, 90)
            Line((0, FILLET1_R), (-FILLET1_R * 0.02, FILLET1_R))
            Line((-FILLET1_R * 0.02, FILLET1_R), (-FILLET1_R * 0.02, -FILLET1_R * 0.02))
            Line((-FILLET1_R * 0.02, -FILLET1_R * 0.02), (FILLET1_R, -FILLET1_R * 0.02))
            Line((FILLET1_R, -FILLET1_R * 0.02), (FILLET1_R, 0))
        make_face()
    fillet1_2_piece_5a = extrude(amount=95.4, mode=Mode.PRIVATE)
    fillet1_2_piece_5a = split(fillet1_2_piece_5a, bisect_by=Plane(origin=(-4.447209771, 80.5, 83.547209771), z_dir=(0, 1, 0)), keep=Keep.TOP, mode=Mode.PRIVATE)
    with BuildSketch(Plane(origin=(-9.9, 80.5, 84), x_dir=(0, -1, 0), z_dir=(1, 0, 0))) as fillet1_2_piece_5b_section:
        with BuildLine():
            CenterArc((FILLET1_R, FILLET1_R), FILLET1_R, 180, 90)
            Line((0, FILLET1_R), (-FILLET1_R * 0.02, FILLET1_R))
            Line((-FILLET1_R * 0.02, FILLET1_R), (-FILLET1_R * 0.02, -FILLET1_R * 0.02))
            Line((-FILLET1_R * 0.02, -FILLET1_R * 0.02), (FILLET1_R, -FILLET1_R * 0.02))
            Line((FILLET1_R, -FILLET1_R * 0.02), (FILLET1_R, 0))
        make_face()
    fillet1_2_piece_5b = extrude(amount=14.8, mode=Mode.PRIVATE)
    fillet1_2_piece_5b = split(fillet1_2_piece_5b, bisect_by=Plane(origin=(-4.9, 80.047209771, 83.547209771), z_dir=(-1, 0, 0)), keep=Keep.TOP, mode=Mode.PRIVATE)
    fillet1_2_piece_5 = fillet1_2_piece_5a & fillet1_2_piece_5b
    add(fillet1_2_piece_5, mode=Mode.SUBTRACT)
    with BuildSketch(Plane(origin=(4.9, 80.5, 84), x_dir=(0, 0, -1), z_dir=(0, -1, 0))) as fillet1_2_piece_6a_section:
        with BuildLine():
            CenterArc((FILLET1_R, -FILLET1_R), FILLET1_R, 90, 90)
            Line((0, -FILLET1_R), (-FILLET1_R * 0.02, -FILLET1_R))
            Line((-FILLET1_R * 0.02, -FILLET1_R), (-FILLET1_R * 0.02, FILLET1_R * 0.02))
            Line((-FILLET1_R * 0.02, FILLET1_R * 0.02), (FILLET1_R, FILLET1_R * 0.02))
            Line((FILLET1_R, FILLET1_R * 0.02), (FILLET1_R, 0))
        make_face()
    fillet1_2_piece_6a = extrude(amount=95.4, mode=Mode.PRIVATE)
    fillet1_2_piece_6a = split(fillet1_2_piece_6a, bisect_by=Plane(origin=(4.447209771, -9.9, 83.547209771), z_dir=(0, -1, 0)), keep=Keep.TOP, mode=Mode.PRIVATE)
    with BuildSketch(Plane(origin=(9.9, -9.9, 84), x_dir=(0, 1, 0), z_dir=(-1, 0, 0))) as fillet1_2_piece_6b_section:
        with BuildLine():
            CenterArc((FILLET1_R, FILLET1_R), FILLET1_R, 180, 90)
            Line((0, FILLET1_R), (-FILLET1_R * 0.02, FILLET1_R))
            Line((-FILLET1_R * 0.02, FILLET1_R), (-FILLET1_R * 0.02, -FILLET1_R * 0.02))
            Line((-FILLET1_R * 0.02, -FILLET1_R * 0.02), (FILLET1_R, -FILLET1_R * 0.02))
            Line((FILLET1_R, -FILLET1_R * 0.02), (FILLET1_R, 0))
        make_face()
    fillet1_2_piece_6b = extrude(amount=14.8, mode=Mode.PRIVATE)
    fillet1_2_piece_6b = split(fillet1_2_piece_6b, bisect_by=Plane(origin=(4.9, -9.447209771, 83.547209771), z_dir=(1, 0, 0)), keep=Keep.TOP, mode=Mode.PRIVATE)
    fillet1_2_piece_6 = fillet1_2_piece_6a & fillet1_2_piece_6b
    add(fillet1_2_piece_6, mode=Mode.SUBTRACT)
    with BuildSketch(Plane(origin=(4.9, 85.5, 84), x_dir=(0, 0, -1), z_dir=(0, -1, 0))) as fillet1_2_piece_7a_section:
        with BuildLine():
            CenterArc((FILLET1_R, -FILLET1_R), FILLET1_R, 90, 90)
            Line((0, -FILLET1_R), (-FILLET1_R * 0.02, -FILLET1_R))
            Line((-FILLET1_R * 0.02, -FILLET1_R), (-FILLET1_R * 0.02, FILLET1_R * 0.02))
            Line((-FILLET1_R * 0.02, FILLET1_R * 0.02), (FILLET1_R, FILLET1_R * 0.02))
            Line((FILLET1_R, FILLET1_R * 0.02), (FILLET1_R, 0))
        make_face()
    fillet1_2_piece_7a = extrude(amount=95.4, mode=Mode.PRIVATE)
    fillet1_2_piece_7a = split(fillet1_2_piece_7a, bisect_by=Plane(origin=(4.447209771, 80.5, 83.547209771), z_dir=(0, 1, 0)), keep=Keep.TOP, mode=Mode.PRIVATE)
    with BuildSketch(Plane(origin=(-4.9, 80.5, 84), x_dir=(0, -1, 0), z_dir=(1, 0, 0))) as fillet1_2_piece_7b_section:
        with BuildLine():
            CenterArc((FILLET1_R, FILLET1_R), FILLET1_R, 180, 90)
            Line((0, FILLET1_R), (-FILLET1_R * 0.02, FILLET1_R))
            Line((-FILLET1_R * 0.02, FILLET1_R), (-FILLET1_R * 0.02, -FILLET1_R * 0.02))
            Line((-FILLET1_R * 0.02, -FILLET1_R * 0.02), (FILLET1_R, -FILLET1_R * 0.02))
            Line((FILLET1_R, -FILLET1_R * 0.02), (FILLET1_R, 0))
        make_face()
    fillet1_2_piece_7b = extrude(amount=14.8, mode=Mode.PRIVATE)
    fillet1_2_piece_7b = split(fillet1_2_piece_7b, bisect_by=Plane(origin=(4.9, 80.047209771, 83.547209771), z_dir=(1, 0, 0)), keep=Keep.TOP, mode=Mode.PRIVATE)
    fillet1_2_piece_7 = fillet1_2_piece_7a & fillet1_2_piece_7b
    add(fillet1_2_piece_7, mode=Mode.SUBTRACT)


solid = part.part
